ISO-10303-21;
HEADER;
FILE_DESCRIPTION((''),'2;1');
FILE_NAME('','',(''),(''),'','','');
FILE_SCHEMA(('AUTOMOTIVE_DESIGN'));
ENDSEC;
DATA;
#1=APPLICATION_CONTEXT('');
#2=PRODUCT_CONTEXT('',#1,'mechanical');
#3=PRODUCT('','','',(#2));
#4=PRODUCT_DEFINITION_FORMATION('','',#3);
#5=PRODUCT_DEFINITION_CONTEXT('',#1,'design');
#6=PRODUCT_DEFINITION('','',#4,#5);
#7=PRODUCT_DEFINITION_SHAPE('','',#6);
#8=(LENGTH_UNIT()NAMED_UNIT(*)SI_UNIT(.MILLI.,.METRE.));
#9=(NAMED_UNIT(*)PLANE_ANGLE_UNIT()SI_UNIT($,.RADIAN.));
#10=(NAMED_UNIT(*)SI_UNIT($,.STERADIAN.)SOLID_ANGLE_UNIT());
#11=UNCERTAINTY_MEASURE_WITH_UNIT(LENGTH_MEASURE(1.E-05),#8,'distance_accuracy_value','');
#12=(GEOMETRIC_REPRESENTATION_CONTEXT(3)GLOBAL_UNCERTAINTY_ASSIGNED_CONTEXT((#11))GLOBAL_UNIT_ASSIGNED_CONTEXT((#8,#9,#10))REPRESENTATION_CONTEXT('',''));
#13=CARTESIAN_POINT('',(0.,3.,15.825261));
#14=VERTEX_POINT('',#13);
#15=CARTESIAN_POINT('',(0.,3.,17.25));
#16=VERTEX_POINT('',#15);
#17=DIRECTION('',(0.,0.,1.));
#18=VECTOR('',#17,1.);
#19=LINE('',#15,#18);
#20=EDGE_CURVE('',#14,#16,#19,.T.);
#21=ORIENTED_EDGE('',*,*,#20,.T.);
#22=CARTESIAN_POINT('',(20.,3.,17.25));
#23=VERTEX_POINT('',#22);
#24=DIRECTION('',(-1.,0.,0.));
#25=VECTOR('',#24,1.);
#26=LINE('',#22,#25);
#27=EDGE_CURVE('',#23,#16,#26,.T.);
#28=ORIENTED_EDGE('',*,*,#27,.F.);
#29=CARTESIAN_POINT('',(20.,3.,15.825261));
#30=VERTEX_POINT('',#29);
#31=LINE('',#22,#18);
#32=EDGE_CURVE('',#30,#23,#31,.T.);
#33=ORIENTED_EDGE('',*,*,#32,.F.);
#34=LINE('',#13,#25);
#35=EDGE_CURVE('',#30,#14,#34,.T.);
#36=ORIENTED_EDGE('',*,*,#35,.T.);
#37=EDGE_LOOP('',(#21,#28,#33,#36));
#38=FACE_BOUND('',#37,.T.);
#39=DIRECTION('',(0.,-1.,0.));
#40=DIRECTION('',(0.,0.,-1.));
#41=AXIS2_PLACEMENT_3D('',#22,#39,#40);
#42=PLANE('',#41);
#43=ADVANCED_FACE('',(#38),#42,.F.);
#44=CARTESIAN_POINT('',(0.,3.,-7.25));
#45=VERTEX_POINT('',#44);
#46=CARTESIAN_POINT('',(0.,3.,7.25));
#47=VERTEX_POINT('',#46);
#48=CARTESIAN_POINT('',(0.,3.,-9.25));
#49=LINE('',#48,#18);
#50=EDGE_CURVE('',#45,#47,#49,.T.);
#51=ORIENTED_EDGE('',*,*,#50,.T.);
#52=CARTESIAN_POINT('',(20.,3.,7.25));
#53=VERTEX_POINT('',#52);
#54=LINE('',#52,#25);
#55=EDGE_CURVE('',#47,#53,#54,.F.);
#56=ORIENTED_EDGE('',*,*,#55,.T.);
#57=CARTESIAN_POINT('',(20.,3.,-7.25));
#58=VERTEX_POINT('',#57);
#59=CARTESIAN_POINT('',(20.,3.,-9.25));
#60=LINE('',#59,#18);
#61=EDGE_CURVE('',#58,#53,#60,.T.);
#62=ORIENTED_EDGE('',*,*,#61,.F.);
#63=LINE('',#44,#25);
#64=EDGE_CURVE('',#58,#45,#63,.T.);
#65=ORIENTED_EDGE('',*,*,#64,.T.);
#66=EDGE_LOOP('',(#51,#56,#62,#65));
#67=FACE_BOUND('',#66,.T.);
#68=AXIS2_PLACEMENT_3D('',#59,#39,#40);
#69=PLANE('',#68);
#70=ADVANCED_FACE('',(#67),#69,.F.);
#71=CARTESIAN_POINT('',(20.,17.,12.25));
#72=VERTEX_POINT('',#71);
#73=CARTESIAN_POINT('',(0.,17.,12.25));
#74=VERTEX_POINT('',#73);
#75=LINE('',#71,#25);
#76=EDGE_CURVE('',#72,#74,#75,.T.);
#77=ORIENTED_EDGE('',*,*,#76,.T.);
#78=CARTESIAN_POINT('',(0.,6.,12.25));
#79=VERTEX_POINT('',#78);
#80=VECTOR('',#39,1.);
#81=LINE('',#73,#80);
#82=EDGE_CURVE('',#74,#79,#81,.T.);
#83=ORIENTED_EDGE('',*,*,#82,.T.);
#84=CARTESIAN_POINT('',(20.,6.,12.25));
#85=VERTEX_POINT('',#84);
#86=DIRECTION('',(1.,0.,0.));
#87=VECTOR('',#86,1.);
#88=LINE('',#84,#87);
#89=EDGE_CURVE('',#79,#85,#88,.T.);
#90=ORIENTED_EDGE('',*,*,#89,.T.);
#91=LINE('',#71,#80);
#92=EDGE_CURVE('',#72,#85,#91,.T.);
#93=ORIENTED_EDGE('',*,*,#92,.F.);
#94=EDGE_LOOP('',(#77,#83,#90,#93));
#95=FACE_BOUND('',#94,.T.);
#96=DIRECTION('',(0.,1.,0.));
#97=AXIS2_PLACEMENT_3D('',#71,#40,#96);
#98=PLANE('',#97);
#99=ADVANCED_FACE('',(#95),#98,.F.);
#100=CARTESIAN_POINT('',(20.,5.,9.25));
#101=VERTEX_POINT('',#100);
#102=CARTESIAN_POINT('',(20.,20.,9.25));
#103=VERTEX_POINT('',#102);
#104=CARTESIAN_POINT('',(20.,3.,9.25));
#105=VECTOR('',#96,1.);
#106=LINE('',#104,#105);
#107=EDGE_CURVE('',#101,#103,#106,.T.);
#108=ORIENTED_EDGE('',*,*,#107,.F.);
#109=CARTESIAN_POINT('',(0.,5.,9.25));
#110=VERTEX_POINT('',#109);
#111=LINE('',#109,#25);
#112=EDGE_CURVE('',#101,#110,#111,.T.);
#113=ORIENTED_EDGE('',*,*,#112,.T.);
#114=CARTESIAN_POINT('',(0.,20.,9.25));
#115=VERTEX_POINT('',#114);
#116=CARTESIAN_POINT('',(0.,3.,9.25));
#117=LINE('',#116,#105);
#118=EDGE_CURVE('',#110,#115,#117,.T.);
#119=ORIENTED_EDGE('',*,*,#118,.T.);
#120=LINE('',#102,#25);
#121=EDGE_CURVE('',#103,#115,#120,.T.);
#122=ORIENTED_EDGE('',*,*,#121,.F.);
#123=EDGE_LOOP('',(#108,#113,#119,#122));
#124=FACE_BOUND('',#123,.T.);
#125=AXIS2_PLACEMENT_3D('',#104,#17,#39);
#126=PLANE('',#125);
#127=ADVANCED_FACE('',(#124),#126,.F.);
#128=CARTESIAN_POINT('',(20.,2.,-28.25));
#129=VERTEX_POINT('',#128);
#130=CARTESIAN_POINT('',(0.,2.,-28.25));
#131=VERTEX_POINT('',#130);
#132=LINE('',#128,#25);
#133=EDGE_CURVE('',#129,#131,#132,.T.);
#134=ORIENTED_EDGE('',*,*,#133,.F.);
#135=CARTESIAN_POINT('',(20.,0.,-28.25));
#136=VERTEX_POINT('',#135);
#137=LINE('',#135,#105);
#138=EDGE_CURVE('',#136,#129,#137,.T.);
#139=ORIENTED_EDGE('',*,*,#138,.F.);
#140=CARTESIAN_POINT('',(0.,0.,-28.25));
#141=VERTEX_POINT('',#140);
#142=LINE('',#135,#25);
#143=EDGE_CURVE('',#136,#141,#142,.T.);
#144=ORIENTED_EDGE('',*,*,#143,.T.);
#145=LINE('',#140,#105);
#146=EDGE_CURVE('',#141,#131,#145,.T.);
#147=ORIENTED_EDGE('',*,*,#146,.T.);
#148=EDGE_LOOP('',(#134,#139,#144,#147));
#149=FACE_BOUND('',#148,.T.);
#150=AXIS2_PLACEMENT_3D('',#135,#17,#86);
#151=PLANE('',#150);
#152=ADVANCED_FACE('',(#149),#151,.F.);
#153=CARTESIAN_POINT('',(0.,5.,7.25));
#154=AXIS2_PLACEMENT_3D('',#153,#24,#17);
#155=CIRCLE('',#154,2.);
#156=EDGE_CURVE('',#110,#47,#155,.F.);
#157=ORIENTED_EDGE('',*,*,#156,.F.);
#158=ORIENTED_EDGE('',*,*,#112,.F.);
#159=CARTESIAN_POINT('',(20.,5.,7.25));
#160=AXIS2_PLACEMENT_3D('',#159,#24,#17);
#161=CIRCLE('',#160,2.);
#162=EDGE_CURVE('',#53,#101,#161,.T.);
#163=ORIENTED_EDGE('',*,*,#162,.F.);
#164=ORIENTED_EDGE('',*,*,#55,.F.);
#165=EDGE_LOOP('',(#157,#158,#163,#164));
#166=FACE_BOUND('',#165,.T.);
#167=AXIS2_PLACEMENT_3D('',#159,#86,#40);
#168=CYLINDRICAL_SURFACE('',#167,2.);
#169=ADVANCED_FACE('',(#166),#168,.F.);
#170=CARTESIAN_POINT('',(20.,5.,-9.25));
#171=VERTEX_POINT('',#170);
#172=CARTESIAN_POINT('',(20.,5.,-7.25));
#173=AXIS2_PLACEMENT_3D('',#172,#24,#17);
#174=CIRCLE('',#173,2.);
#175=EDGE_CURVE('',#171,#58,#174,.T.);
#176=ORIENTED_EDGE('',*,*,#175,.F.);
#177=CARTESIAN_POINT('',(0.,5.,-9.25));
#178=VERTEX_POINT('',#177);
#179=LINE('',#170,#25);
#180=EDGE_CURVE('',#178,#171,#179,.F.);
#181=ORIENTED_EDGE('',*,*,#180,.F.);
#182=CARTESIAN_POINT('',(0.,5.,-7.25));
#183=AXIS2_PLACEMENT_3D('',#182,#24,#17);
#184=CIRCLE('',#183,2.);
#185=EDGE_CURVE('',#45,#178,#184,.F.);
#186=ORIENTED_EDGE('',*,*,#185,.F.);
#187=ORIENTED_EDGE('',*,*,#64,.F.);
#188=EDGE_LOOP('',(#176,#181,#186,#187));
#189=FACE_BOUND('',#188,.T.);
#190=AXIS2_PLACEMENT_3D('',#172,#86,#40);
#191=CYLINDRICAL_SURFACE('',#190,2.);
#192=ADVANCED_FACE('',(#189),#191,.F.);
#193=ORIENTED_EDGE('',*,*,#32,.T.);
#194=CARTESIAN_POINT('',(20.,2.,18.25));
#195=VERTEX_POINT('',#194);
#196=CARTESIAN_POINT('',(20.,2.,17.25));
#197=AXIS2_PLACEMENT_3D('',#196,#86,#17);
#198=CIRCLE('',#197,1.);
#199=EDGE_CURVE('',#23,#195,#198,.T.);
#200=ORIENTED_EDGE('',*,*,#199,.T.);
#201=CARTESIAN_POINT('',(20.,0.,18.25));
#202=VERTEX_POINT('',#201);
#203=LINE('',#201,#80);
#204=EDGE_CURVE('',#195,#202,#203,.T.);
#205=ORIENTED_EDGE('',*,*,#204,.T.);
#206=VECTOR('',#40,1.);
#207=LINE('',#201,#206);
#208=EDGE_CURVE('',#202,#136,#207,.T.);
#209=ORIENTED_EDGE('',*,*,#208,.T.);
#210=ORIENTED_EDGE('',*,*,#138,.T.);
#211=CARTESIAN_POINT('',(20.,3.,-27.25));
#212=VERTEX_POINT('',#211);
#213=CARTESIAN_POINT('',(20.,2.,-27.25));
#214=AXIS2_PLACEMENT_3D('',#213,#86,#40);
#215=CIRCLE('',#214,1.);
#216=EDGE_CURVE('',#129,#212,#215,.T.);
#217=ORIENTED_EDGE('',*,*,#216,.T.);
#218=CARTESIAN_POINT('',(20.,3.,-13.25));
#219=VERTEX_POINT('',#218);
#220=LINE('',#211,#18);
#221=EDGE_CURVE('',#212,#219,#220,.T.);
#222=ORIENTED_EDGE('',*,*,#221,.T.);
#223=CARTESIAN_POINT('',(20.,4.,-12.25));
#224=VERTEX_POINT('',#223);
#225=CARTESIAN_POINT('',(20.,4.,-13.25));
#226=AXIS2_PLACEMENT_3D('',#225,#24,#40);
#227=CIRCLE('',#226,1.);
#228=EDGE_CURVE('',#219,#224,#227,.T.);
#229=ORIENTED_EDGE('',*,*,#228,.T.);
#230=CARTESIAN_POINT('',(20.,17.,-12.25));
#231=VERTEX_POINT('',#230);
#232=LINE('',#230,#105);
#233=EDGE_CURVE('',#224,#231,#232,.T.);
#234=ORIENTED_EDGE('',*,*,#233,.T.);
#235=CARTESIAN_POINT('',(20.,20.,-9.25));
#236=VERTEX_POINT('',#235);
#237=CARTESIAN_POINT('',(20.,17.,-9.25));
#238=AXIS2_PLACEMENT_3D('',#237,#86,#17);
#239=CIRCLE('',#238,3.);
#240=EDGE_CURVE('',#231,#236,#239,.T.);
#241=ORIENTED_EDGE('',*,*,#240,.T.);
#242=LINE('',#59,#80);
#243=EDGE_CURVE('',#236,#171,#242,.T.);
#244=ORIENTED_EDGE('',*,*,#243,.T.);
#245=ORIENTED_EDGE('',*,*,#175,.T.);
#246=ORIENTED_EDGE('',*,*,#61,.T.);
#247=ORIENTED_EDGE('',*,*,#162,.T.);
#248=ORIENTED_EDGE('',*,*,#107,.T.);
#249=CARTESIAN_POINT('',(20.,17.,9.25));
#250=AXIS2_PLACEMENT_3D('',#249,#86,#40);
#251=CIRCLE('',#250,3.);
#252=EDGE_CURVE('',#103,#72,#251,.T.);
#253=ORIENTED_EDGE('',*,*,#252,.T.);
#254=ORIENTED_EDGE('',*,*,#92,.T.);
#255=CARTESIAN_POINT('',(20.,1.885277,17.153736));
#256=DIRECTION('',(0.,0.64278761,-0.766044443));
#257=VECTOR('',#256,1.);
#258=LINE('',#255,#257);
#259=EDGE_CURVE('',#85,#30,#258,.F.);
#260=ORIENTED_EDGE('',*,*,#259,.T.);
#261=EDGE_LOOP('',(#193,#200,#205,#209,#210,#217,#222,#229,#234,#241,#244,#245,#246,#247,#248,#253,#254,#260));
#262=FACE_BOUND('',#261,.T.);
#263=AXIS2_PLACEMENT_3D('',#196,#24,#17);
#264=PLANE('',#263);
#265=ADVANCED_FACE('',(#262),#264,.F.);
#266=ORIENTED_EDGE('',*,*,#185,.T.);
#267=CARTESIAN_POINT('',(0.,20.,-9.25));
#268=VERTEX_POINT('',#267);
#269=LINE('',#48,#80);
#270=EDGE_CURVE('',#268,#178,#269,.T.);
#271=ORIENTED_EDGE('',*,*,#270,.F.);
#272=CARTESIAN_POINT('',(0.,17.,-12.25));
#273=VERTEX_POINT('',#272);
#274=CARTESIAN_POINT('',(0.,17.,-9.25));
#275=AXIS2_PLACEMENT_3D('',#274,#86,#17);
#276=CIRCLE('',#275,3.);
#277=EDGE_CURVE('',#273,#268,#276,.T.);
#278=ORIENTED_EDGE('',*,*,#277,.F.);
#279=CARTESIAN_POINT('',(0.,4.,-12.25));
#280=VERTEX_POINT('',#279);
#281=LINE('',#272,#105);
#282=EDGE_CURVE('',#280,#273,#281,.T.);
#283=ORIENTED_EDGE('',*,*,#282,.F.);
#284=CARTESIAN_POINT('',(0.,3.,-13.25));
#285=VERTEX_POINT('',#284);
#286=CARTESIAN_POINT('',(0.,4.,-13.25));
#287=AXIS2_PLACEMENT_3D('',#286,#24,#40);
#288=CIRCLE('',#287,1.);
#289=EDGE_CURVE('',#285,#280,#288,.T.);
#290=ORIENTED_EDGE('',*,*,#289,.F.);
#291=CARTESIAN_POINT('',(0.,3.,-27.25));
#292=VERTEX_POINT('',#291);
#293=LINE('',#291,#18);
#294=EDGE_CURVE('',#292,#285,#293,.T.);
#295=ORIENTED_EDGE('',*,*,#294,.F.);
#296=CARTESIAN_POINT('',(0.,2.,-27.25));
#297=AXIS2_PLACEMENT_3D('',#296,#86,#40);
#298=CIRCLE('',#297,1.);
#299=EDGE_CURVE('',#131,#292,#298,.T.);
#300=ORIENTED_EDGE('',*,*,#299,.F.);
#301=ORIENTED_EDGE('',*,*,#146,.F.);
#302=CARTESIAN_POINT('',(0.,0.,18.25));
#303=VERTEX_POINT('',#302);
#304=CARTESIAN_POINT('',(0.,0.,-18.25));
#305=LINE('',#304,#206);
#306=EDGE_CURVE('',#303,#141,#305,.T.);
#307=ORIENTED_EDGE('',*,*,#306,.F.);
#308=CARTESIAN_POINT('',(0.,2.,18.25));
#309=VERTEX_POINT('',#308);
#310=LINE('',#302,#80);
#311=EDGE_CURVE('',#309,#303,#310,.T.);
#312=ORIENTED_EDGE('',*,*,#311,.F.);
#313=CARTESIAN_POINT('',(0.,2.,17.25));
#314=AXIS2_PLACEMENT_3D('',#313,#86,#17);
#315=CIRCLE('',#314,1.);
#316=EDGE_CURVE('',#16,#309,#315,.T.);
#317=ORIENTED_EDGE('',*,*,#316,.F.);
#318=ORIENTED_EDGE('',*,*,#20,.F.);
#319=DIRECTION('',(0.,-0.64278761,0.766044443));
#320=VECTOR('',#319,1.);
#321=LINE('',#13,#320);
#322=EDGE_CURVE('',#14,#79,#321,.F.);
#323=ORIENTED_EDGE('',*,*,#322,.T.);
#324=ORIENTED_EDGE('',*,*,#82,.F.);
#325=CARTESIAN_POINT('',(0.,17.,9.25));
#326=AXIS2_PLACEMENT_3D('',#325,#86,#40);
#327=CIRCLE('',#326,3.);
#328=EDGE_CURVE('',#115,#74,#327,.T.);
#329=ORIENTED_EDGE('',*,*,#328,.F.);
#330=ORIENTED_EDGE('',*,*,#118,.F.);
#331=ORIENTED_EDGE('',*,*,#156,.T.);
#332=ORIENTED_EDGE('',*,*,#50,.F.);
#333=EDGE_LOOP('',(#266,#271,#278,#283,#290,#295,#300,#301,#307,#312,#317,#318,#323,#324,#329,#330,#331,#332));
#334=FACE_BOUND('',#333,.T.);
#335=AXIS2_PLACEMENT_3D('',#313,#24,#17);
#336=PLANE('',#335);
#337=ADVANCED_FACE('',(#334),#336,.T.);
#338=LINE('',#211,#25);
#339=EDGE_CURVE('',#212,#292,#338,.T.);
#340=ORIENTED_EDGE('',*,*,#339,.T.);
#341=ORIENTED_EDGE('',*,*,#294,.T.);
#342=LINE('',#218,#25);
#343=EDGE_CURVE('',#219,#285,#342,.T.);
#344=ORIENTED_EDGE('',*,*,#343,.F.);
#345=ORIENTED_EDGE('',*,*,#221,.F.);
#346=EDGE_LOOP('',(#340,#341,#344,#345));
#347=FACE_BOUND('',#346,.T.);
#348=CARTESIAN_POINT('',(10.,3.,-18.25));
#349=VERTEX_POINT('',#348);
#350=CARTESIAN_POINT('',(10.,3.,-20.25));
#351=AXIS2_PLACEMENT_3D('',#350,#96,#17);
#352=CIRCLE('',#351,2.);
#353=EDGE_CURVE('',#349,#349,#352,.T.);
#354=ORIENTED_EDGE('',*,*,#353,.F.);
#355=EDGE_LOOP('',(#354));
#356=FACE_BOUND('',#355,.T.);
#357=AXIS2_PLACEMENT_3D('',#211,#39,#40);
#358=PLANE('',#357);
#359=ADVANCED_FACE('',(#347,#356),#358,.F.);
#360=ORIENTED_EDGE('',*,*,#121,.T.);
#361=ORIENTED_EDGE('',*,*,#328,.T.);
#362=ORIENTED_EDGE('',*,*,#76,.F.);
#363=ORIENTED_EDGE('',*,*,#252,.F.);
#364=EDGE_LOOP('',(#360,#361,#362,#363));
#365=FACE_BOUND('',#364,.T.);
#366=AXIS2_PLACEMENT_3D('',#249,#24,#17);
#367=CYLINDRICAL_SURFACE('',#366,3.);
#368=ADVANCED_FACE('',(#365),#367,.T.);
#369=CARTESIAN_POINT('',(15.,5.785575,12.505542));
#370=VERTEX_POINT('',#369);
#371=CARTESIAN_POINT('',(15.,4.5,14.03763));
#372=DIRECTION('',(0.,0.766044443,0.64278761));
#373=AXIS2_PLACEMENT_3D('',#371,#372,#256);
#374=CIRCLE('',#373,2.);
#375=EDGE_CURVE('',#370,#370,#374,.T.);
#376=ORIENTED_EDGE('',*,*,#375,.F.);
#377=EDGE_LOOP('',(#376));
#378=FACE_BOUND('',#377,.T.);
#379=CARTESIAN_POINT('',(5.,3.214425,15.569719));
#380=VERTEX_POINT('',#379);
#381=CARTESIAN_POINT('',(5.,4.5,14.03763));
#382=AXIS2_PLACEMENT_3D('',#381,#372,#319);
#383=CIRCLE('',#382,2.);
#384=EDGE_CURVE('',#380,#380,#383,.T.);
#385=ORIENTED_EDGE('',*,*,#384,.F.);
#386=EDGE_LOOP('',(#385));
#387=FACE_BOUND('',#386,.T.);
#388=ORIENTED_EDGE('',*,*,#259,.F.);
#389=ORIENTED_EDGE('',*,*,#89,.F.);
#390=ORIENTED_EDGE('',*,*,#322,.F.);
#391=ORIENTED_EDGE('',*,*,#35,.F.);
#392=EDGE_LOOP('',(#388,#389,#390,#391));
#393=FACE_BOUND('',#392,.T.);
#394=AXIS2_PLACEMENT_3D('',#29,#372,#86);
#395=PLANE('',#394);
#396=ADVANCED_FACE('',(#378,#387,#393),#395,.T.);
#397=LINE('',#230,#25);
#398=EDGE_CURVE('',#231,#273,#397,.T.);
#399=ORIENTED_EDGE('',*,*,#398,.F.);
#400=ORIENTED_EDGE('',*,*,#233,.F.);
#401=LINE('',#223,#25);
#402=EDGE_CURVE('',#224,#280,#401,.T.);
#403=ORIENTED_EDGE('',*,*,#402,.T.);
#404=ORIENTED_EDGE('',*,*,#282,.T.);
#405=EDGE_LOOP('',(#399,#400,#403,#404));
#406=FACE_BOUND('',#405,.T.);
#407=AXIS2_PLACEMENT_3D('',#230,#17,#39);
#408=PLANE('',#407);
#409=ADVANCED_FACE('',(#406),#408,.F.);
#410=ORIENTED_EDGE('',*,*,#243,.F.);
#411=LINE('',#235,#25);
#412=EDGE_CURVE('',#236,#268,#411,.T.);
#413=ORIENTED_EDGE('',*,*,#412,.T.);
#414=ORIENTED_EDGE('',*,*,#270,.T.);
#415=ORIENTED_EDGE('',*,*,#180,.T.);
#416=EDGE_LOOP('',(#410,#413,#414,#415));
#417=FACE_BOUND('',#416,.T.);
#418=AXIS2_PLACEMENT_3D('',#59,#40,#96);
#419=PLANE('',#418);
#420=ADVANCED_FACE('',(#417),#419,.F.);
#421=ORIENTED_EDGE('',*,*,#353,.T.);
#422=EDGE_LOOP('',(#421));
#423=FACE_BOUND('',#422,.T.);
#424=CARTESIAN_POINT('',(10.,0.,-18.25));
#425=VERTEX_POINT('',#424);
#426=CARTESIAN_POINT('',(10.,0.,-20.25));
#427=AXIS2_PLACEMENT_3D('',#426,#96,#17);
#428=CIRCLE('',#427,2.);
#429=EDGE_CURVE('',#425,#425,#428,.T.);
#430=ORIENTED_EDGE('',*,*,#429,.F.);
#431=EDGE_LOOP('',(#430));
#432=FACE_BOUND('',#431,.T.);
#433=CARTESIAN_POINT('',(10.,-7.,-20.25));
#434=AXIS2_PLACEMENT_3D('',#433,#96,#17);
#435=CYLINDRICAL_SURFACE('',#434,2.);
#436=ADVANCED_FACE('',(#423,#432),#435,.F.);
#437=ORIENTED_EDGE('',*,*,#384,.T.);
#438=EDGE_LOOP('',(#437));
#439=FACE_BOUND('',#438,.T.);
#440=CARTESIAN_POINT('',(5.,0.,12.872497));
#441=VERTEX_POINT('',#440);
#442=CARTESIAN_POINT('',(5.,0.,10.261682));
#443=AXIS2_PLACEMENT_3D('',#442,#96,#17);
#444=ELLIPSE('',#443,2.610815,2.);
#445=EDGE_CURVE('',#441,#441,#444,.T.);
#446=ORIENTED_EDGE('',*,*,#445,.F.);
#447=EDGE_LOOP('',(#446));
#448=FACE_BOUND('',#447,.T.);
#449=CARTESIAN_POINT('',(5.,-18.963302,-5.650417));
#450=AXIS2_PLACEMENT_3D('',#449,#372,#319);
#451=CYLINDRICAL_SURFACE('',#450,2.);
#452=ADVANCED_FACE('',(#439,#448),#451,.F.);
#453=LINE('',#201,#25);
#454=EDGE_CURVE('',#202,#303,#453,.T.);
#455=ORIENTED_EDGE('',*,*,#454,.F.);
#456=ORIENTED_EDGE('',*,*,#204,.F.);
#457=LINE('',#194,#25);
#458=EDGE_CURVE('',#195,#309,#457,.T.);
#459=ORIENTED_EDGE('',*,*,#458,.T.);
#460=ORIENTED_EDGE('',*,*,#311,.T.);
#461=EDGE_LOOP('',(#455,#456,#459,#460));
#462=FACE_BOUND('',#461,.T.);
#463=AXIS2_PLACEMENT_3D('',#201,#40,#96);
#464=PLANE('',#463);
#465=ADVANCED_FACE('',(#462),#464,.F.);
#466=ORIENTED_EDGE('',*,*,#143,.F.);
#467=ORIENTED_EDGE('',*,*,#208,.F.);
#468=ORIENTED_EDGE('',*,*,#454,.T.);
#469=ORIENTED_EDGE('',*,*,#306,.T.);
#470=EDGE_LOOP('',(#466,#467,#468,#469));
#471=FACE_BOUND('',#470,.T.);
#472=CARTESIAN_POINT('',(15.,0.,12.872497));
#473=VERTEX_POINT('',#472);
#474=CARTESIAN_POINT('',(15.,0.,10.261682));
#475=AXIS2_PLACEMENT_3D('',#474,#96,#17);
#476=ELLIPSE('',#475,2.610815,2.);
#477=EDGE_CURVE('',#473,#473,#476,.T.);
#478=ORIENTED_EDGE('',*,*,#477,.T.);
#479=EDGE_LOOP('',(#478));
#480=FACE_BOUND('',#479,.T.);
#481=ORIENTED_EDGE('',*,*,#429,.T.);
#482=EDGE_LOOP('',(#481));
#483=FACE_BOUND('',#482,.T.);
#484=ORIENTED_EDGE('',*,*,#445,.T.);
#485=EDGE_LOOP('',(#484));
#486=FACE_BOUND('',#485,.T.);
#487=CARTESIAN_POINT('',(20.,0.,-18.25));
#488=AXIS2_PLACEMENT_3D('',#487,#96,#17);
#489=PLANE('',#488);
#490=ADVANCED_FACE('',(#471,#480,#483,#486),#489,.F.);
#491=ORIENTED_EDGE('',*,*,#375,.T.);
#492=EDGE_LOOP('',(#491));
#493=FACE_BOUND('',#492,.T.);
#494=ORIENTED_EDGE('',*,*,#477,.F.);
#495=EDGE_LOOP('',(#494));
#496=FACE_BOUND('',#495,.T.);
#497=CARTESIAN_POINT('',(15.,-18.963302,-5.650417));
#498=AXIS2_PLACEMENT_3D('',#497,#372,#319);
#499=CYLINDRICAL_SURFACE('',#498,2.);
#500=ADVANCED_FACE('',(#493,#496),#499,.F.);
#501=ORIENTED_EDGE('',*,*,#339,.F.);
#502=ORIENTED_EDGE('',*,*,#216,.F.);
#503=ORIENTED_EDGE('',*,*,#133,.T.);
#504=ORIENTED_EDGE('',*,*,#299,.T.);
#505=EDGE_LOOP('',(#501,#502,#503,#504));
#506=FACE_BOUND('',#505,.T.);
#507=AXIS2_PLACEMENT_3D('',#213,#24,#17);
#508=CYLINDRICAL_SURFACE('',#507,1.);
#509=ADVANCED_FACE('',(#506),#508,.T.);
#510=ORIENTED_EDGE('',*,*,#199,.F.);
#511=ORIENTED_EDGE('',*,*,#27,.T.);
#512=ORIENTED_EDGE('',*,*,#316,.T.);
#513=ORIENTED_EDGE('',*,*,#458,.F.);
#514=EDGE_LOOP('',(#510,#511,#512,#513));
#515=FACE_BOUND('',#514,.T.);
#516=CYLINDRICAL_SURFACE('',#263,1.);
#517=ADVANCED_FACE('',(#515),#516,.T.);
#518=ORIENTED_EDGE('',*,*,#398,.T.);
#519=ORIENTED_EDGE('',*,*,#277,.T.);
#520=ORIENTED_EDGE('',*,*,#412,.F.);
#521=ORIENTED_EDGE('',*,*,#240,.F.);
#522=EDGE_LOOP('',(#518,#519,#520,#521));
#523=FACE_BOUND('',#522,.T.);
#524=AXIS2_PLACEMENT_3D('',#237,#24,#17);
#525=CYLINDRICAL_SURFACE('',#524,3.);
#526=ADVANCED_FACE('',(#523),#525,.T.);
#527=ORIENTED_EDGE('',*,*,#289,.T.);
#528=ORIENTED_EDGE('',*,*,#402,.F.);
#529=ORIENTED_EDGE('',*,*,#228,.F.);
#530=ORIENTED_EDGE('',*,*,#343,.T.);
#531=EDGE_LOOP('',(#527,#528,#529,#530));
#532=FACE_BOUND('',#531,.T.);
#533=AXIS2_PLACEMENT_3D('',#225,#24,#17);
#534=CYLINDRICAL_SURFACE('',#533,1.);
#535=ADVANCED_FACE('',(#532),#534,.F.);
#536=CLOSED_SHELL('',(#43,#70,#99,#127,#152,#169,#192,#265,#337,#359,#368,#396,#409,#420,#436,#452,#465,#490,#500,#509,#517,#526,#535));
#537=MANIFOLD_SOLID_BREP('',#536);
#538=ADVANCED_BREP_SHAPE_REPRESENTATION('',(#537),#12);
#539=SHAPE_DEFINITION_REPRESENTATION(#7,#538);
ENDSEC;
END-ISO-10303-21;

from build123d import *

# Parameters (mm, degrees)
RESSALTO_EXTRUS_O1_DEPTH = 20
FILETE12_R               = 2
CHANFRO1_SIZE            = 3
CHANFRO1_SIZE2           = 3.575260778
ESBO_O3_R                = 2
CORTE_EXTRUS_O1_DEPTH    = 43.712437978
ESBO_O4_R                = 2
CORTE_EXTRUS_O2_DEPTH    = 10


with BuildPart() as part:
    # Esboço2 → Ressalto-extrusão1 (new body)
    with BuildSketch(Plane(origin=(0, 0, 0), x_dir=(0, 0, -1), z_dir=(1, 0, 0))):
        with BuildLine():
            Line((-18.25, 0), (18.25, 0))
            Line((18.25, 0), (28.25, 0))
            Line((28.25, 0), (28.25, 2))
            ThreePointArc((28.25, 2), (27.957106781, 2.707106781), (27.25, 3))
            Line((27.25, 3), (13.25, 3))
            ThreePointArc((13.25, 3), (12.542893219, 3.292893219), (12.25, 4))
            Line((12.25, 4), (12.25, 17))
            ThreePointArc((12.25, 17), (11.371320344, 19.121320344), (9.25, 20))
            Line((9.25, 20), (9.25, 3))
            Line((9.25, 3), (-9.25, 3))
            Line((-9.25, 3), (-9.25, 20))
            ThreePointArc((-9.25, 20), (-11.371320344, 19.121320344), (-12.25, 17))
            Line((-12.25, 17), (-12.25, 3))
            Line((-12.25, 3), (-17.25, 3))
            ThreePointArc((-17.25, 3), (-17.957106781, 2.707106781), (-18.25, 2))
            Line((-18.25, 2), (-18.25, 0))
        make_face()
    extrude(amount=RESSALTO_EXTRUS_O1_DEPTH)

    # Filete12
    filete12_edges = [part.edges().sort_by_distance(p)[0] for p in [
        (10, 3, 9.25),
        (10, 3, -9.25),
    ]]
    fillet(filete12_edges, radius=FILETE12_R)

    # Chanfro1
    chanfro1_edges = [part.edges().sort_by_distance(p)[0] for p in [
        (10, 3, 12.25),
    ]]
    chanfro1_side = [part.faces().sort_by_distance(p)[0] for p in [
        (10, 10, 12.25),
    ]]
    chamfer(chanfro1_edges, length=CHANFRO1_SIZE, length2=CHANFRO1_SIZE2, reference=chanfro1_side[0])

    # Esboço3 → Corte-extrusão1 (cut, through all)
    with BuildSketch(Plane(origin=(0, 9.55289202, 8.015828171), x_dir=(1, 0, 0), z_dir=(0, 0.7660444431189817, 0.6427876096865351))):
        with Locations((5, -7.86090451)):
            Circle(ESBO_O3_R)
        with Locations((15, -7.86090451)):
            Circle(ESBO_O3_R)
    extrude(amount=-CORTE_EXTRUS_O1_DEPTH, mode=Mode.SUBTRACT)

    # Esboço4 → Corte-extrusão2 (cut)
    with BuildSketch(Plane(origin=(0, 3, 0), x_dir=(1, 0, 0), z_dir=(0, 1, 0))):
        with Locations((10, 20.25)):
            Circle(ESBO_O4_R)
    extrude(amount=-CORTE_EXTRUS_O2_DEPTH, mode=Mode.SUBTRACT)


solid = part.part
